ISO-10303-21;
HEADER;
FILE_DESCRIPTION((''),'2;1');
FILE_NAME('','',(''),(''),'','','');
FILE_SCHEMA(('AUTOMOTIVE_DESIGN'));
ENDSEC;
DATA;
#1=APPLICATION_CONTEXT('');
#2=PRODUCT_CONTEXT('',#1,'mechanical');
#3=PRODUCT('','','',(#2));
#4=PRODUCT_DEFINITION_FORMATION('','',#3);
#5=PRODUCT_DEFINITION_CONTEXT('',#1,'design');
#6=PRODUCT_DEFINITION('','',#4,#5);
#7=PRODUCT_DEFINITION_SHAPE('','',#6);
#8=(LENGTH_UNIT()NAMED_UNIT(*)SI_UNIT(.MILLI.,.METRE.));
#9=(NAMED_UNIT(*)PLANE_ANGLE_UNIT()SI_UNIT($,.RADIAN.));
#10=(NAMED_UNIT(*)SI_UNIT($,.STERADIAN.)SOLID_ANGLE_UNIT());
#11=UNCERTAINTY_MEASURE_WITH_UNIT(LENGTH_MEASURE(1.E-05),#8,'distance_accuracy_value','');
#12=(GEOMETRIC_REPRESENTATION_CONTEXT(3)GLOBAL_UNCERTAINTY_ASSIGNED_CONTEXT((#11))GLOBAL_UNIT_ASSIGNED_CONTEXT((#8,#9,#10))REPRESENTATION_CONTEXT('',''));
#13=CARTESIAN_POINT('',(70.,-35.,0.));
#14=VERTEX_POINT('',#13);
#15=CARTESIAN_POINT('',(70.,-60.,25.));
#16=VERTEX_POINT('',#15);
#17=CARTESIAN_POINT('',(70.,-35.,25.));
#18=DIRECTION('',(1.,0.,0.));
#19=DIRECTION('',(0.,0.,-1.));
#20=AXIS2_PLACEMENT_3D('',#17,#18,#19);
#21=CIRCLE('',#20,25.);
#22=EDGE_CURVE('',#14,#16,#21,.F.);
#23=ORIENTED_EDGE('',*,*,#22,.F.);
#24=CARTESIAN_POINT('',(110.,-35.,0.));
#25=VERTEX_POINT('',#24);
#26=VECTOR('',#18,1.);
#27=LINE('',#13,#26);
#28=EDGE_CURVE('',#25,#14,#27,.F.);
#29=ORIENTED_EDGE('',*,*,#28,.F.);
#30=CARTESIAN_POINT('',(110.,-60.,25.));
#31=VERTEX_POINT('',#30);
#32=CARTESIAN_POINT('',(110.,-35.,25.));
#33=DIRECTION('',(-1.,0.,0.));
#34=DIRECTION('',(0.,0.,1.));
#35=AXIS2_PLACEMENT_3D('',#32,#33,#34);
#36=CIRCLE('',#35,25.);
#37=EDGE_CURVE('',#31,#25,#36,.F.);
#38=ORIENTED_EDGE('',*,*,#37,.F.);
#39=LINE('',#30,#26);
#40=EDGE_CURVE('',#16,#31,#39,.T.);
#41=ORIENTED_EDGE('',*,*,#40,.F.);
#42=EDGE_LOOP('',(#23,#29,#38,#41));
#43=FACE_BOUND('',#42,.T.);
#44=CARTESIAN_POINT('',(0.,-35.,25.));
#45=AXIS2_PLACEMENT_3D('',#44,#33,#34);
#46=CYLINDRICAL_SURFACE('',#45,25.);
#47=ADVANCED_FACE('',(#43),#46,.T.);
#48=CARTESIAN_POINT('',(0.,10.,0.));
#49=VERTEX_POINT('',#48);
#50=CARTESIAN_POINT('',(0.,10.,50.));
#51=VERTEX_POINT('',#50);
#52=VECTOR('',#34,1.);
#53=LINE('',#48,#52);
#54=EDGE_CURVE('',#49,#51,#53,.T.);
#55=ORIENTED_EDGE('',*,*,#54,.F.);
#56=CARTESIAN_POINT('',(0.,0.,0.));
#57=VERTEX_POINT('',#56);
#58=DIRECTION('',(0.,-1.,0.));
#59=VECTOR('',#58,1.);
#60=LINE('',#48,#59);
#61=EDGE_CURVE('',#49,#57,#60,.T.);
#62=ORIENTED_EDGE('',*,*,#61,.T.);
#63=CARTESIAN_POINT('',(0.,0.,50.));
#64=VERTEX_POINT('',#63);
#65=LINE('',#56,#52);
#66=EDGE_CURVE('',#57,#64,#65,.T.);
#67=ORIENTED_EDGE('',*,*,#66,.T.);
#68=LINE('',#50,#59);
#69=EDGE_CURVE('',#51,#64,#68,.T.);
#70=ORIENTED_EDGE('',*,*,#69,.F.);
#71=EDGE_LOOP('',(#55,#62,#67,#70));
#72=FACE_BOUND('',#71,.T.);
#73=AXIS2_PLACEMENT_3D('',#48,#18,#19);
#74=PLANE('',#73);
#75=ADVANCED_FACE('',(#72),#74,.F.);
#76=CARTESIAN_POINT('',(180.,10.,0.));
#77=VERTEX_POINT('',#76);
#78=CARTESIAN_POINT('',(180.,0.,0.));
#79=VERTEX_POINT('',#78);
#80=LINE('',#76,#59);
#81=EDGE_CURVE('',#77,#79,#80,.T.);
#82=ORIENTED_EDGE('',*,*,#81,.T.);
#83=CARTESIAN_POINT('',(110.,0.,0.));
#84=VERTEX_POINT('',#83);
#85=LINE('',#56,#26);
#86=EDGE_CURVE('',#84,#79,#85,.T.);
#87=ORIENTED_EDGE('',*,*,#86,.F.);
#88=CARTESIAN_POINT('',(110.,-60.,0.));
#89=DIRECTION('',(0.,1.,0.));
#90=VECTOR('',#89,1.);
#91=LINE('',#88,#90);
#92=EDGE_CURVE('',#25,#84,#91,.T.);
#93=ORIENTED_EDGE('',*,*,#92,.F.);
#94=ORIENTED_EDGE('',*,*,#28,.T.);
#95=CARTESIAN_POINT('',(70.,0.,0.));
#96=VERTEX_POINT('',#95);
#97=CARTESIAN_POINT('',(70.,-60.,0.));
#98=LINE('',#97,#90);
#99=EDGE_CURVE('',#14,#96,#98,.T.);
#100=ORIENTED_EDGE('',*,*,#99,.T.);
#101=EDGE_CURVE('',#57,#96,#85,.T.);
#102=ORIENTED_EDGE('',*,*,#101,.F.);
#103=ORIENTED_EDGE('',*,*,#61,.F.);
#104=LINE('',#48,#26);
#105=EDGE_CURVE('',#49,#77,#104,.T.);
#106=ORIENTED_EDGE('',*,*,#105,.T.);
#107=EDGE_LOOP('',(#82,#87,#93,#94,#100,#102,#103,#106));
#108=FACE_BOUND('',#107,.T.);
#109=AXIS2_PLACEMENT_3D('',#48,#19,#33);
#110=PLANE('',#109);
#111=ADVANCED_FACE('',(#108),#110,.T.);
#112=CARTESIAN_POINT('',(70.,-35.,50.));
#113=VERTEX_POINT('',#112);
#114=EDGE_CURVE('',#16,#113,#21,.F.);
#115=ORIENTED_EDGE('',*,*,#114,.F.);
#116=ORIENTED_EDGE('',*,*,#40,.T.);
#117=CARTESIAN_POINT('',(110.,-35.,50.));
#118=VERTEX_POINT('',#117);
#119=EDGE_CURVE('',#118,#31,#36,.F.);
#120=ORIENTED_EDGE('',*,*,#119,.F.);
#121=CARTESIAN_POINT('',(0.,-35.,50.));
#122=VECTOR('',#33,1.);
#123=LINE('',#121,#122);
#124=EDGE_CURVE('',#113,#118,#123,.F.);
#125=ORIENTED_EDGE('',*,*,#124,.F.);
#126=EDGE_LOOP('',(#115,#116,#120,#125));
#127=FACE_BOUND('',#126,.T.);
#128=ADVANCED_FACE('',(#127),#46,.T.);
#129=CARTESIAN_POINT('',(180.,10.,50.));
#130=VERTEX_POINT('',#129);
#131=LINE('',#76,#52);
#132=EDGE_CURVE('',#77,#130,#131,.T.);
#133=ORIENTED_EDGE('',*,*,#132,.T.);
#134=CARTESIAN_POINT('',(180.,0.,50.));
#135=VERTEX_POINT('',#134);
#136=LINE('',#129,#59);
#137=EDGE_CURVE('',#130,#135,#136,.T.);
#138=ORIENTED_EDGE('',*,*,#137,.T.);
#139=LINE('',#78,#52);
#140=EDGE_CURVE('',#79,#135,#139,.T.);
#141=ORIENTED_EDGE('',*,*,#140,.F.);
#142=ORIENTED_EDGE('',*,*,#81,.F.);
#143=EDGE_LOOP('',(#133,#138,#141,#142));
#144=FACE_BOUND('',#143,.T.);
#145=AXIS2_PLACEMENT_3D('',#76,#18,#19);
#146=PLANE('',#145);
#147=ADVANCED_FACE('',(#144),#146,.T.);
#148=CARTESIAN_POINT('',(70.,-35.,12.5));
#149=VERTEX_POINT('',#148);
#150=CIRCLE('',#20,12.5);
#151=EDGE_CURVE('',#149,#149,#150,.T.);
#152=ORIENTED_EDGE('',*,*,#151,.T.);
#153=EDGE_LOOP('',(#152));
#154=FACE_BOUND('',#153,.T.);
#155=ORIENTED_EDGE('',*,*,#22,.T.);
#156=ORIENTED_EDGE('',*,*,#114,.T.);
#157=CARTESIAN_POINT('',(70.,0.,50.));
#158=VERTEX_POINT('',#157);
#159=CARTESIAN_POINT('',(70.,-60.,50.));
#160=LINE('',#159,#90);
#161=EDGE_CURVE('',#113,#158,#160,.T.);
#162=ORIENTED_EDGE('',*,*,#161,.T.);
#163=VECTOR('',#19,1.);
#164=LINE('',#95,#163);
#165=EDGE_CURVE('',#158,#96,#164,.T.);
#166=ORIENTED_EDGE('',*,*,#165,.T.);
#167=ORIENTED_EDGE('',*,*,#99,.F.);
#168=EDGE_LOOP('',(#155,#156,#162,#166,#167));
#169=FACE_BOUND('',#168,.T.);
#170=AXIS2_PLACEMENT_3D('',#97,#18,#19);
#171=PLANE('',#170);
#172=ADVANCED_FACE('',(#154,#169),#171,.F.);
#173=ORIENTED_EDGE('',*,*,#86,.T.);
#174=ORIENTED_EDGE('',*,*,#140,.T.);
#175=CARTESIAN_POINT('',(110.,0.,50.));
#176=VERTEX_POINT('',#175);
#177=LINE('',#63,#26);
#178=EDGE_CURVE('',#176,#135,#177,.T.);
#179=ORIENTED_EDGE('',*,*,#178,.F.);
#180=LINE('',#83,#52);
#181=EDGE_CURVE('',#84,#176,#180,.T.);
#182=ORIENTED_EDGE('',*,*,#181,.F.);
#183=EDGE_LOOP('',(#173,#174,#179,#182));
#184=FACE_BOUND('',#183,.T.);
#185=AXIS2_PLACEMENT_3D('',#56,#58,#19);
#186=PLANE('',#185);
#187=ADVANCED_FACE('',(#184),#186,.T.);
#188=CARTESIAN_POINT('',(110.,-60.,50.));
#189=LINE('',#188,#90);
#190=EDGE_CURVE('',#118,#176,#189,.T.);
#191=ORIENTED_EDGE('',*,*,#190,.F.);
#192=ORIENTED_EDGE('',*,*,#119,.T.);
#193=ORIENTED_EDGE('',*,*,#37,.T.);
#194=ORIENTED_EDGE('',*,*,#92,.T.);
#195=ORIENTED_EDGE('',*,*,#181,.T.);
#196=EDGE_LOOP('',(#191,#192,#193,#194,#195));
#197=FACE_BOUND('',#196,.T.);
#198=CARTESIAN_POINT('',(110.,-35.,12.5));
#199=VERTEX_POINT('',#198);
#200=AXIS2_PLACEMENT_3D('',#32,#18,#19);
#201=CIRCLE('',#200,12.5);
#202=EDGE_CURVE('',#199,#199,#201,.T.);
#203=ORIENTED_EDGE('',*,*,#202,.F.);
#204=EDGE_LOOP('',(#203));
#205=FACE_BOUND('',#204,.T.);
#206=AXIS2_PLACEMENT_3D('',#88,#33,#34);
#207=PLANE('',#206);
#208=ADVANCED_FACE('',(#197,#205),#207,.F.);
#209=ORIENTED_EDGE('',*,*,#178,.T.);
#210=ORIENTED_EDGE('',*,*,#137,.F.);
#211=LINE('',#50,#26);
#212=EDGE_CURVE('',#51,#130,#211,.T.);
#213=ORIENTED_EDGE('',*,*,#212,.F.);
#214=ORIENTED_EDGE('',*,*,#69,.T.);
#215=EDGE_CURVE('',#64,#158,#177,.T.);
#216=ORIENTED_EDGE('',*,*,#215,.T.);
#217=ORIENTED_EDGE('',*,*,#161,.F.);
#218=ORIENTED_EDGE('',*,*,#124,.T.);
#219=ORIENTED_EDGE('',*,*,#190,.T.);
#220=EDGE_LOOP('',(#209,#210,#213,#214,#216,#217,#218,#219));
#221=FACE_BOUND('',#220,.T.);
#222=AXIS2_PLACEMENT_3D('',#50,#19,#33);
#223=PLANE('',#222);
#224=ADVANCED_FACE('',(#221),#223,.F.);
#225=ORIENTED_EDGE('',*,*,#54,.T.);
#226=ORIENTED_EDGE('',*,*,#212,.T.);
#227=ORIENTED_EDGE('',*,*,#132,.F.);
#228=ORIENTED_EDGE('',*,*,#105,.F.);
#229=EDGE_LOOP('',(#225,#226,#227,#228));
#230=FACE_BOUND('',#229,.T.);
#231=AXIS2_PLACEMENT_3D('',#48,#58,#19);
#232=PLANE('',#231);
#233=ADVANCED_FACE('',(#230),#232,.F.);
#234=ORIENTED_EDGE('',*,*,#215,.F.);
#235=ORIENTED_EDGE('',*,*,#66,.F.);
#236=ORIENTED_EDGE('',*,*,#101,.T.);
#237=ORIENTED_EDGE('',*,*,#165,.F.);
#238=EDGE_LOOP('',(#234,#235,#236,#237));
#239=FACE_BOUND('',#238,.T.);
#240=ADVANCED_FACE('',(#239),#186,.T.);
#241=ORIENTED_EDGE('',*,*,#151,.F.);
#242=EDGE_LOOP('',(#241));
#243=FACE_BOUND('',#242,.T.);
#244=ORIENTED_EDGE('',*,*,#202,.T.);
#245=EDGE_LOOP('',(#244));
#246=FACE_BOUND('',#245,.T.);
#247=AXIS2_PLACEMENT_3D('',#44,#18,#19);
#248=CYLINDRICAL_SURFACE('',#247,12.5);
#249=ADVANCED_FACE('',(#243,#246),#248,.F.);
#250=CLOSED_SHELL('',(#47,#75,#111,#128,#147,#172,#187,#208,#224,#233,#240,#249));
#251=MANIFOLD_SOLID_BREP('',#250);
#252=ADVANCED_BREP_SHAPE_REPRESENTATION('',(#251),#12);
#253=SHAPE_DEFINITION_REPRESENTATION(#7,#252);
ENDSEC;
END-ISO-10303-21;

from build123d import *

# Parameters (mm, degrees)
SKETCH_1_W          = 180
SKETCH_1_H          = 50
EXTRUDE_1_DEPTH     = 10
SKETCH_2_W          = 40
SKETCH_2_H          = 50
EXTRUDE_2_DEPTH     = 60
FILLET_1_R          = 25
SKETCH_3_R          = 12.5
CUT_EXTRUDE_2_DEPTH = 135.907375632


with BuildPart() as part:
    # 草图1 → 凸台-拉伸1 (new body)
    with BuildSketch(Plane(origin=(0, 0, 0), x_dir=(1, 0, 0), z_dir=(0, 1, 0))):
        with Locations((90, -25)):
            Rectangle(SKETCH_1_W, SKETCH_1_H)
    extrude(amount=EXTRUDE_1_DEPTH)

    # 草图2 → 凸台-拉伸2 (add)
    with BuildSketch(Plane.XZ):
        with Locations((90, 25)):
            Rectangle(SKETCH_2_W, SKETCH_2_H)
    extrude(amount=EXTRUDE_2_DEPTH)

    # 圆角1
    fillet_1_edges = [part.edges().sort_by_distance(p)[0] for p in [
        (90, -60, 50),
        (90, -60, 0),
    ]]
    fillet(fillet_1_edges, radius=FILLET_1_R - 0.0001)  # a hair under: the kernel refuses the full size

    # 草图3 → 切除-拉伸2 (cut, through all)
    with BuildSketch(Plane(origin=(110, 0, 0), x_dir=(0, 0, -1), z_dir=(1, 0, 0))):
        with Locations((-25, -35)):
            Circle(SKETCH_3_R)
    extrude(amount=-CUT_EXTRUDE_2_DEPTH, mode=Mode.SUBTRACT)


solid = part.part
